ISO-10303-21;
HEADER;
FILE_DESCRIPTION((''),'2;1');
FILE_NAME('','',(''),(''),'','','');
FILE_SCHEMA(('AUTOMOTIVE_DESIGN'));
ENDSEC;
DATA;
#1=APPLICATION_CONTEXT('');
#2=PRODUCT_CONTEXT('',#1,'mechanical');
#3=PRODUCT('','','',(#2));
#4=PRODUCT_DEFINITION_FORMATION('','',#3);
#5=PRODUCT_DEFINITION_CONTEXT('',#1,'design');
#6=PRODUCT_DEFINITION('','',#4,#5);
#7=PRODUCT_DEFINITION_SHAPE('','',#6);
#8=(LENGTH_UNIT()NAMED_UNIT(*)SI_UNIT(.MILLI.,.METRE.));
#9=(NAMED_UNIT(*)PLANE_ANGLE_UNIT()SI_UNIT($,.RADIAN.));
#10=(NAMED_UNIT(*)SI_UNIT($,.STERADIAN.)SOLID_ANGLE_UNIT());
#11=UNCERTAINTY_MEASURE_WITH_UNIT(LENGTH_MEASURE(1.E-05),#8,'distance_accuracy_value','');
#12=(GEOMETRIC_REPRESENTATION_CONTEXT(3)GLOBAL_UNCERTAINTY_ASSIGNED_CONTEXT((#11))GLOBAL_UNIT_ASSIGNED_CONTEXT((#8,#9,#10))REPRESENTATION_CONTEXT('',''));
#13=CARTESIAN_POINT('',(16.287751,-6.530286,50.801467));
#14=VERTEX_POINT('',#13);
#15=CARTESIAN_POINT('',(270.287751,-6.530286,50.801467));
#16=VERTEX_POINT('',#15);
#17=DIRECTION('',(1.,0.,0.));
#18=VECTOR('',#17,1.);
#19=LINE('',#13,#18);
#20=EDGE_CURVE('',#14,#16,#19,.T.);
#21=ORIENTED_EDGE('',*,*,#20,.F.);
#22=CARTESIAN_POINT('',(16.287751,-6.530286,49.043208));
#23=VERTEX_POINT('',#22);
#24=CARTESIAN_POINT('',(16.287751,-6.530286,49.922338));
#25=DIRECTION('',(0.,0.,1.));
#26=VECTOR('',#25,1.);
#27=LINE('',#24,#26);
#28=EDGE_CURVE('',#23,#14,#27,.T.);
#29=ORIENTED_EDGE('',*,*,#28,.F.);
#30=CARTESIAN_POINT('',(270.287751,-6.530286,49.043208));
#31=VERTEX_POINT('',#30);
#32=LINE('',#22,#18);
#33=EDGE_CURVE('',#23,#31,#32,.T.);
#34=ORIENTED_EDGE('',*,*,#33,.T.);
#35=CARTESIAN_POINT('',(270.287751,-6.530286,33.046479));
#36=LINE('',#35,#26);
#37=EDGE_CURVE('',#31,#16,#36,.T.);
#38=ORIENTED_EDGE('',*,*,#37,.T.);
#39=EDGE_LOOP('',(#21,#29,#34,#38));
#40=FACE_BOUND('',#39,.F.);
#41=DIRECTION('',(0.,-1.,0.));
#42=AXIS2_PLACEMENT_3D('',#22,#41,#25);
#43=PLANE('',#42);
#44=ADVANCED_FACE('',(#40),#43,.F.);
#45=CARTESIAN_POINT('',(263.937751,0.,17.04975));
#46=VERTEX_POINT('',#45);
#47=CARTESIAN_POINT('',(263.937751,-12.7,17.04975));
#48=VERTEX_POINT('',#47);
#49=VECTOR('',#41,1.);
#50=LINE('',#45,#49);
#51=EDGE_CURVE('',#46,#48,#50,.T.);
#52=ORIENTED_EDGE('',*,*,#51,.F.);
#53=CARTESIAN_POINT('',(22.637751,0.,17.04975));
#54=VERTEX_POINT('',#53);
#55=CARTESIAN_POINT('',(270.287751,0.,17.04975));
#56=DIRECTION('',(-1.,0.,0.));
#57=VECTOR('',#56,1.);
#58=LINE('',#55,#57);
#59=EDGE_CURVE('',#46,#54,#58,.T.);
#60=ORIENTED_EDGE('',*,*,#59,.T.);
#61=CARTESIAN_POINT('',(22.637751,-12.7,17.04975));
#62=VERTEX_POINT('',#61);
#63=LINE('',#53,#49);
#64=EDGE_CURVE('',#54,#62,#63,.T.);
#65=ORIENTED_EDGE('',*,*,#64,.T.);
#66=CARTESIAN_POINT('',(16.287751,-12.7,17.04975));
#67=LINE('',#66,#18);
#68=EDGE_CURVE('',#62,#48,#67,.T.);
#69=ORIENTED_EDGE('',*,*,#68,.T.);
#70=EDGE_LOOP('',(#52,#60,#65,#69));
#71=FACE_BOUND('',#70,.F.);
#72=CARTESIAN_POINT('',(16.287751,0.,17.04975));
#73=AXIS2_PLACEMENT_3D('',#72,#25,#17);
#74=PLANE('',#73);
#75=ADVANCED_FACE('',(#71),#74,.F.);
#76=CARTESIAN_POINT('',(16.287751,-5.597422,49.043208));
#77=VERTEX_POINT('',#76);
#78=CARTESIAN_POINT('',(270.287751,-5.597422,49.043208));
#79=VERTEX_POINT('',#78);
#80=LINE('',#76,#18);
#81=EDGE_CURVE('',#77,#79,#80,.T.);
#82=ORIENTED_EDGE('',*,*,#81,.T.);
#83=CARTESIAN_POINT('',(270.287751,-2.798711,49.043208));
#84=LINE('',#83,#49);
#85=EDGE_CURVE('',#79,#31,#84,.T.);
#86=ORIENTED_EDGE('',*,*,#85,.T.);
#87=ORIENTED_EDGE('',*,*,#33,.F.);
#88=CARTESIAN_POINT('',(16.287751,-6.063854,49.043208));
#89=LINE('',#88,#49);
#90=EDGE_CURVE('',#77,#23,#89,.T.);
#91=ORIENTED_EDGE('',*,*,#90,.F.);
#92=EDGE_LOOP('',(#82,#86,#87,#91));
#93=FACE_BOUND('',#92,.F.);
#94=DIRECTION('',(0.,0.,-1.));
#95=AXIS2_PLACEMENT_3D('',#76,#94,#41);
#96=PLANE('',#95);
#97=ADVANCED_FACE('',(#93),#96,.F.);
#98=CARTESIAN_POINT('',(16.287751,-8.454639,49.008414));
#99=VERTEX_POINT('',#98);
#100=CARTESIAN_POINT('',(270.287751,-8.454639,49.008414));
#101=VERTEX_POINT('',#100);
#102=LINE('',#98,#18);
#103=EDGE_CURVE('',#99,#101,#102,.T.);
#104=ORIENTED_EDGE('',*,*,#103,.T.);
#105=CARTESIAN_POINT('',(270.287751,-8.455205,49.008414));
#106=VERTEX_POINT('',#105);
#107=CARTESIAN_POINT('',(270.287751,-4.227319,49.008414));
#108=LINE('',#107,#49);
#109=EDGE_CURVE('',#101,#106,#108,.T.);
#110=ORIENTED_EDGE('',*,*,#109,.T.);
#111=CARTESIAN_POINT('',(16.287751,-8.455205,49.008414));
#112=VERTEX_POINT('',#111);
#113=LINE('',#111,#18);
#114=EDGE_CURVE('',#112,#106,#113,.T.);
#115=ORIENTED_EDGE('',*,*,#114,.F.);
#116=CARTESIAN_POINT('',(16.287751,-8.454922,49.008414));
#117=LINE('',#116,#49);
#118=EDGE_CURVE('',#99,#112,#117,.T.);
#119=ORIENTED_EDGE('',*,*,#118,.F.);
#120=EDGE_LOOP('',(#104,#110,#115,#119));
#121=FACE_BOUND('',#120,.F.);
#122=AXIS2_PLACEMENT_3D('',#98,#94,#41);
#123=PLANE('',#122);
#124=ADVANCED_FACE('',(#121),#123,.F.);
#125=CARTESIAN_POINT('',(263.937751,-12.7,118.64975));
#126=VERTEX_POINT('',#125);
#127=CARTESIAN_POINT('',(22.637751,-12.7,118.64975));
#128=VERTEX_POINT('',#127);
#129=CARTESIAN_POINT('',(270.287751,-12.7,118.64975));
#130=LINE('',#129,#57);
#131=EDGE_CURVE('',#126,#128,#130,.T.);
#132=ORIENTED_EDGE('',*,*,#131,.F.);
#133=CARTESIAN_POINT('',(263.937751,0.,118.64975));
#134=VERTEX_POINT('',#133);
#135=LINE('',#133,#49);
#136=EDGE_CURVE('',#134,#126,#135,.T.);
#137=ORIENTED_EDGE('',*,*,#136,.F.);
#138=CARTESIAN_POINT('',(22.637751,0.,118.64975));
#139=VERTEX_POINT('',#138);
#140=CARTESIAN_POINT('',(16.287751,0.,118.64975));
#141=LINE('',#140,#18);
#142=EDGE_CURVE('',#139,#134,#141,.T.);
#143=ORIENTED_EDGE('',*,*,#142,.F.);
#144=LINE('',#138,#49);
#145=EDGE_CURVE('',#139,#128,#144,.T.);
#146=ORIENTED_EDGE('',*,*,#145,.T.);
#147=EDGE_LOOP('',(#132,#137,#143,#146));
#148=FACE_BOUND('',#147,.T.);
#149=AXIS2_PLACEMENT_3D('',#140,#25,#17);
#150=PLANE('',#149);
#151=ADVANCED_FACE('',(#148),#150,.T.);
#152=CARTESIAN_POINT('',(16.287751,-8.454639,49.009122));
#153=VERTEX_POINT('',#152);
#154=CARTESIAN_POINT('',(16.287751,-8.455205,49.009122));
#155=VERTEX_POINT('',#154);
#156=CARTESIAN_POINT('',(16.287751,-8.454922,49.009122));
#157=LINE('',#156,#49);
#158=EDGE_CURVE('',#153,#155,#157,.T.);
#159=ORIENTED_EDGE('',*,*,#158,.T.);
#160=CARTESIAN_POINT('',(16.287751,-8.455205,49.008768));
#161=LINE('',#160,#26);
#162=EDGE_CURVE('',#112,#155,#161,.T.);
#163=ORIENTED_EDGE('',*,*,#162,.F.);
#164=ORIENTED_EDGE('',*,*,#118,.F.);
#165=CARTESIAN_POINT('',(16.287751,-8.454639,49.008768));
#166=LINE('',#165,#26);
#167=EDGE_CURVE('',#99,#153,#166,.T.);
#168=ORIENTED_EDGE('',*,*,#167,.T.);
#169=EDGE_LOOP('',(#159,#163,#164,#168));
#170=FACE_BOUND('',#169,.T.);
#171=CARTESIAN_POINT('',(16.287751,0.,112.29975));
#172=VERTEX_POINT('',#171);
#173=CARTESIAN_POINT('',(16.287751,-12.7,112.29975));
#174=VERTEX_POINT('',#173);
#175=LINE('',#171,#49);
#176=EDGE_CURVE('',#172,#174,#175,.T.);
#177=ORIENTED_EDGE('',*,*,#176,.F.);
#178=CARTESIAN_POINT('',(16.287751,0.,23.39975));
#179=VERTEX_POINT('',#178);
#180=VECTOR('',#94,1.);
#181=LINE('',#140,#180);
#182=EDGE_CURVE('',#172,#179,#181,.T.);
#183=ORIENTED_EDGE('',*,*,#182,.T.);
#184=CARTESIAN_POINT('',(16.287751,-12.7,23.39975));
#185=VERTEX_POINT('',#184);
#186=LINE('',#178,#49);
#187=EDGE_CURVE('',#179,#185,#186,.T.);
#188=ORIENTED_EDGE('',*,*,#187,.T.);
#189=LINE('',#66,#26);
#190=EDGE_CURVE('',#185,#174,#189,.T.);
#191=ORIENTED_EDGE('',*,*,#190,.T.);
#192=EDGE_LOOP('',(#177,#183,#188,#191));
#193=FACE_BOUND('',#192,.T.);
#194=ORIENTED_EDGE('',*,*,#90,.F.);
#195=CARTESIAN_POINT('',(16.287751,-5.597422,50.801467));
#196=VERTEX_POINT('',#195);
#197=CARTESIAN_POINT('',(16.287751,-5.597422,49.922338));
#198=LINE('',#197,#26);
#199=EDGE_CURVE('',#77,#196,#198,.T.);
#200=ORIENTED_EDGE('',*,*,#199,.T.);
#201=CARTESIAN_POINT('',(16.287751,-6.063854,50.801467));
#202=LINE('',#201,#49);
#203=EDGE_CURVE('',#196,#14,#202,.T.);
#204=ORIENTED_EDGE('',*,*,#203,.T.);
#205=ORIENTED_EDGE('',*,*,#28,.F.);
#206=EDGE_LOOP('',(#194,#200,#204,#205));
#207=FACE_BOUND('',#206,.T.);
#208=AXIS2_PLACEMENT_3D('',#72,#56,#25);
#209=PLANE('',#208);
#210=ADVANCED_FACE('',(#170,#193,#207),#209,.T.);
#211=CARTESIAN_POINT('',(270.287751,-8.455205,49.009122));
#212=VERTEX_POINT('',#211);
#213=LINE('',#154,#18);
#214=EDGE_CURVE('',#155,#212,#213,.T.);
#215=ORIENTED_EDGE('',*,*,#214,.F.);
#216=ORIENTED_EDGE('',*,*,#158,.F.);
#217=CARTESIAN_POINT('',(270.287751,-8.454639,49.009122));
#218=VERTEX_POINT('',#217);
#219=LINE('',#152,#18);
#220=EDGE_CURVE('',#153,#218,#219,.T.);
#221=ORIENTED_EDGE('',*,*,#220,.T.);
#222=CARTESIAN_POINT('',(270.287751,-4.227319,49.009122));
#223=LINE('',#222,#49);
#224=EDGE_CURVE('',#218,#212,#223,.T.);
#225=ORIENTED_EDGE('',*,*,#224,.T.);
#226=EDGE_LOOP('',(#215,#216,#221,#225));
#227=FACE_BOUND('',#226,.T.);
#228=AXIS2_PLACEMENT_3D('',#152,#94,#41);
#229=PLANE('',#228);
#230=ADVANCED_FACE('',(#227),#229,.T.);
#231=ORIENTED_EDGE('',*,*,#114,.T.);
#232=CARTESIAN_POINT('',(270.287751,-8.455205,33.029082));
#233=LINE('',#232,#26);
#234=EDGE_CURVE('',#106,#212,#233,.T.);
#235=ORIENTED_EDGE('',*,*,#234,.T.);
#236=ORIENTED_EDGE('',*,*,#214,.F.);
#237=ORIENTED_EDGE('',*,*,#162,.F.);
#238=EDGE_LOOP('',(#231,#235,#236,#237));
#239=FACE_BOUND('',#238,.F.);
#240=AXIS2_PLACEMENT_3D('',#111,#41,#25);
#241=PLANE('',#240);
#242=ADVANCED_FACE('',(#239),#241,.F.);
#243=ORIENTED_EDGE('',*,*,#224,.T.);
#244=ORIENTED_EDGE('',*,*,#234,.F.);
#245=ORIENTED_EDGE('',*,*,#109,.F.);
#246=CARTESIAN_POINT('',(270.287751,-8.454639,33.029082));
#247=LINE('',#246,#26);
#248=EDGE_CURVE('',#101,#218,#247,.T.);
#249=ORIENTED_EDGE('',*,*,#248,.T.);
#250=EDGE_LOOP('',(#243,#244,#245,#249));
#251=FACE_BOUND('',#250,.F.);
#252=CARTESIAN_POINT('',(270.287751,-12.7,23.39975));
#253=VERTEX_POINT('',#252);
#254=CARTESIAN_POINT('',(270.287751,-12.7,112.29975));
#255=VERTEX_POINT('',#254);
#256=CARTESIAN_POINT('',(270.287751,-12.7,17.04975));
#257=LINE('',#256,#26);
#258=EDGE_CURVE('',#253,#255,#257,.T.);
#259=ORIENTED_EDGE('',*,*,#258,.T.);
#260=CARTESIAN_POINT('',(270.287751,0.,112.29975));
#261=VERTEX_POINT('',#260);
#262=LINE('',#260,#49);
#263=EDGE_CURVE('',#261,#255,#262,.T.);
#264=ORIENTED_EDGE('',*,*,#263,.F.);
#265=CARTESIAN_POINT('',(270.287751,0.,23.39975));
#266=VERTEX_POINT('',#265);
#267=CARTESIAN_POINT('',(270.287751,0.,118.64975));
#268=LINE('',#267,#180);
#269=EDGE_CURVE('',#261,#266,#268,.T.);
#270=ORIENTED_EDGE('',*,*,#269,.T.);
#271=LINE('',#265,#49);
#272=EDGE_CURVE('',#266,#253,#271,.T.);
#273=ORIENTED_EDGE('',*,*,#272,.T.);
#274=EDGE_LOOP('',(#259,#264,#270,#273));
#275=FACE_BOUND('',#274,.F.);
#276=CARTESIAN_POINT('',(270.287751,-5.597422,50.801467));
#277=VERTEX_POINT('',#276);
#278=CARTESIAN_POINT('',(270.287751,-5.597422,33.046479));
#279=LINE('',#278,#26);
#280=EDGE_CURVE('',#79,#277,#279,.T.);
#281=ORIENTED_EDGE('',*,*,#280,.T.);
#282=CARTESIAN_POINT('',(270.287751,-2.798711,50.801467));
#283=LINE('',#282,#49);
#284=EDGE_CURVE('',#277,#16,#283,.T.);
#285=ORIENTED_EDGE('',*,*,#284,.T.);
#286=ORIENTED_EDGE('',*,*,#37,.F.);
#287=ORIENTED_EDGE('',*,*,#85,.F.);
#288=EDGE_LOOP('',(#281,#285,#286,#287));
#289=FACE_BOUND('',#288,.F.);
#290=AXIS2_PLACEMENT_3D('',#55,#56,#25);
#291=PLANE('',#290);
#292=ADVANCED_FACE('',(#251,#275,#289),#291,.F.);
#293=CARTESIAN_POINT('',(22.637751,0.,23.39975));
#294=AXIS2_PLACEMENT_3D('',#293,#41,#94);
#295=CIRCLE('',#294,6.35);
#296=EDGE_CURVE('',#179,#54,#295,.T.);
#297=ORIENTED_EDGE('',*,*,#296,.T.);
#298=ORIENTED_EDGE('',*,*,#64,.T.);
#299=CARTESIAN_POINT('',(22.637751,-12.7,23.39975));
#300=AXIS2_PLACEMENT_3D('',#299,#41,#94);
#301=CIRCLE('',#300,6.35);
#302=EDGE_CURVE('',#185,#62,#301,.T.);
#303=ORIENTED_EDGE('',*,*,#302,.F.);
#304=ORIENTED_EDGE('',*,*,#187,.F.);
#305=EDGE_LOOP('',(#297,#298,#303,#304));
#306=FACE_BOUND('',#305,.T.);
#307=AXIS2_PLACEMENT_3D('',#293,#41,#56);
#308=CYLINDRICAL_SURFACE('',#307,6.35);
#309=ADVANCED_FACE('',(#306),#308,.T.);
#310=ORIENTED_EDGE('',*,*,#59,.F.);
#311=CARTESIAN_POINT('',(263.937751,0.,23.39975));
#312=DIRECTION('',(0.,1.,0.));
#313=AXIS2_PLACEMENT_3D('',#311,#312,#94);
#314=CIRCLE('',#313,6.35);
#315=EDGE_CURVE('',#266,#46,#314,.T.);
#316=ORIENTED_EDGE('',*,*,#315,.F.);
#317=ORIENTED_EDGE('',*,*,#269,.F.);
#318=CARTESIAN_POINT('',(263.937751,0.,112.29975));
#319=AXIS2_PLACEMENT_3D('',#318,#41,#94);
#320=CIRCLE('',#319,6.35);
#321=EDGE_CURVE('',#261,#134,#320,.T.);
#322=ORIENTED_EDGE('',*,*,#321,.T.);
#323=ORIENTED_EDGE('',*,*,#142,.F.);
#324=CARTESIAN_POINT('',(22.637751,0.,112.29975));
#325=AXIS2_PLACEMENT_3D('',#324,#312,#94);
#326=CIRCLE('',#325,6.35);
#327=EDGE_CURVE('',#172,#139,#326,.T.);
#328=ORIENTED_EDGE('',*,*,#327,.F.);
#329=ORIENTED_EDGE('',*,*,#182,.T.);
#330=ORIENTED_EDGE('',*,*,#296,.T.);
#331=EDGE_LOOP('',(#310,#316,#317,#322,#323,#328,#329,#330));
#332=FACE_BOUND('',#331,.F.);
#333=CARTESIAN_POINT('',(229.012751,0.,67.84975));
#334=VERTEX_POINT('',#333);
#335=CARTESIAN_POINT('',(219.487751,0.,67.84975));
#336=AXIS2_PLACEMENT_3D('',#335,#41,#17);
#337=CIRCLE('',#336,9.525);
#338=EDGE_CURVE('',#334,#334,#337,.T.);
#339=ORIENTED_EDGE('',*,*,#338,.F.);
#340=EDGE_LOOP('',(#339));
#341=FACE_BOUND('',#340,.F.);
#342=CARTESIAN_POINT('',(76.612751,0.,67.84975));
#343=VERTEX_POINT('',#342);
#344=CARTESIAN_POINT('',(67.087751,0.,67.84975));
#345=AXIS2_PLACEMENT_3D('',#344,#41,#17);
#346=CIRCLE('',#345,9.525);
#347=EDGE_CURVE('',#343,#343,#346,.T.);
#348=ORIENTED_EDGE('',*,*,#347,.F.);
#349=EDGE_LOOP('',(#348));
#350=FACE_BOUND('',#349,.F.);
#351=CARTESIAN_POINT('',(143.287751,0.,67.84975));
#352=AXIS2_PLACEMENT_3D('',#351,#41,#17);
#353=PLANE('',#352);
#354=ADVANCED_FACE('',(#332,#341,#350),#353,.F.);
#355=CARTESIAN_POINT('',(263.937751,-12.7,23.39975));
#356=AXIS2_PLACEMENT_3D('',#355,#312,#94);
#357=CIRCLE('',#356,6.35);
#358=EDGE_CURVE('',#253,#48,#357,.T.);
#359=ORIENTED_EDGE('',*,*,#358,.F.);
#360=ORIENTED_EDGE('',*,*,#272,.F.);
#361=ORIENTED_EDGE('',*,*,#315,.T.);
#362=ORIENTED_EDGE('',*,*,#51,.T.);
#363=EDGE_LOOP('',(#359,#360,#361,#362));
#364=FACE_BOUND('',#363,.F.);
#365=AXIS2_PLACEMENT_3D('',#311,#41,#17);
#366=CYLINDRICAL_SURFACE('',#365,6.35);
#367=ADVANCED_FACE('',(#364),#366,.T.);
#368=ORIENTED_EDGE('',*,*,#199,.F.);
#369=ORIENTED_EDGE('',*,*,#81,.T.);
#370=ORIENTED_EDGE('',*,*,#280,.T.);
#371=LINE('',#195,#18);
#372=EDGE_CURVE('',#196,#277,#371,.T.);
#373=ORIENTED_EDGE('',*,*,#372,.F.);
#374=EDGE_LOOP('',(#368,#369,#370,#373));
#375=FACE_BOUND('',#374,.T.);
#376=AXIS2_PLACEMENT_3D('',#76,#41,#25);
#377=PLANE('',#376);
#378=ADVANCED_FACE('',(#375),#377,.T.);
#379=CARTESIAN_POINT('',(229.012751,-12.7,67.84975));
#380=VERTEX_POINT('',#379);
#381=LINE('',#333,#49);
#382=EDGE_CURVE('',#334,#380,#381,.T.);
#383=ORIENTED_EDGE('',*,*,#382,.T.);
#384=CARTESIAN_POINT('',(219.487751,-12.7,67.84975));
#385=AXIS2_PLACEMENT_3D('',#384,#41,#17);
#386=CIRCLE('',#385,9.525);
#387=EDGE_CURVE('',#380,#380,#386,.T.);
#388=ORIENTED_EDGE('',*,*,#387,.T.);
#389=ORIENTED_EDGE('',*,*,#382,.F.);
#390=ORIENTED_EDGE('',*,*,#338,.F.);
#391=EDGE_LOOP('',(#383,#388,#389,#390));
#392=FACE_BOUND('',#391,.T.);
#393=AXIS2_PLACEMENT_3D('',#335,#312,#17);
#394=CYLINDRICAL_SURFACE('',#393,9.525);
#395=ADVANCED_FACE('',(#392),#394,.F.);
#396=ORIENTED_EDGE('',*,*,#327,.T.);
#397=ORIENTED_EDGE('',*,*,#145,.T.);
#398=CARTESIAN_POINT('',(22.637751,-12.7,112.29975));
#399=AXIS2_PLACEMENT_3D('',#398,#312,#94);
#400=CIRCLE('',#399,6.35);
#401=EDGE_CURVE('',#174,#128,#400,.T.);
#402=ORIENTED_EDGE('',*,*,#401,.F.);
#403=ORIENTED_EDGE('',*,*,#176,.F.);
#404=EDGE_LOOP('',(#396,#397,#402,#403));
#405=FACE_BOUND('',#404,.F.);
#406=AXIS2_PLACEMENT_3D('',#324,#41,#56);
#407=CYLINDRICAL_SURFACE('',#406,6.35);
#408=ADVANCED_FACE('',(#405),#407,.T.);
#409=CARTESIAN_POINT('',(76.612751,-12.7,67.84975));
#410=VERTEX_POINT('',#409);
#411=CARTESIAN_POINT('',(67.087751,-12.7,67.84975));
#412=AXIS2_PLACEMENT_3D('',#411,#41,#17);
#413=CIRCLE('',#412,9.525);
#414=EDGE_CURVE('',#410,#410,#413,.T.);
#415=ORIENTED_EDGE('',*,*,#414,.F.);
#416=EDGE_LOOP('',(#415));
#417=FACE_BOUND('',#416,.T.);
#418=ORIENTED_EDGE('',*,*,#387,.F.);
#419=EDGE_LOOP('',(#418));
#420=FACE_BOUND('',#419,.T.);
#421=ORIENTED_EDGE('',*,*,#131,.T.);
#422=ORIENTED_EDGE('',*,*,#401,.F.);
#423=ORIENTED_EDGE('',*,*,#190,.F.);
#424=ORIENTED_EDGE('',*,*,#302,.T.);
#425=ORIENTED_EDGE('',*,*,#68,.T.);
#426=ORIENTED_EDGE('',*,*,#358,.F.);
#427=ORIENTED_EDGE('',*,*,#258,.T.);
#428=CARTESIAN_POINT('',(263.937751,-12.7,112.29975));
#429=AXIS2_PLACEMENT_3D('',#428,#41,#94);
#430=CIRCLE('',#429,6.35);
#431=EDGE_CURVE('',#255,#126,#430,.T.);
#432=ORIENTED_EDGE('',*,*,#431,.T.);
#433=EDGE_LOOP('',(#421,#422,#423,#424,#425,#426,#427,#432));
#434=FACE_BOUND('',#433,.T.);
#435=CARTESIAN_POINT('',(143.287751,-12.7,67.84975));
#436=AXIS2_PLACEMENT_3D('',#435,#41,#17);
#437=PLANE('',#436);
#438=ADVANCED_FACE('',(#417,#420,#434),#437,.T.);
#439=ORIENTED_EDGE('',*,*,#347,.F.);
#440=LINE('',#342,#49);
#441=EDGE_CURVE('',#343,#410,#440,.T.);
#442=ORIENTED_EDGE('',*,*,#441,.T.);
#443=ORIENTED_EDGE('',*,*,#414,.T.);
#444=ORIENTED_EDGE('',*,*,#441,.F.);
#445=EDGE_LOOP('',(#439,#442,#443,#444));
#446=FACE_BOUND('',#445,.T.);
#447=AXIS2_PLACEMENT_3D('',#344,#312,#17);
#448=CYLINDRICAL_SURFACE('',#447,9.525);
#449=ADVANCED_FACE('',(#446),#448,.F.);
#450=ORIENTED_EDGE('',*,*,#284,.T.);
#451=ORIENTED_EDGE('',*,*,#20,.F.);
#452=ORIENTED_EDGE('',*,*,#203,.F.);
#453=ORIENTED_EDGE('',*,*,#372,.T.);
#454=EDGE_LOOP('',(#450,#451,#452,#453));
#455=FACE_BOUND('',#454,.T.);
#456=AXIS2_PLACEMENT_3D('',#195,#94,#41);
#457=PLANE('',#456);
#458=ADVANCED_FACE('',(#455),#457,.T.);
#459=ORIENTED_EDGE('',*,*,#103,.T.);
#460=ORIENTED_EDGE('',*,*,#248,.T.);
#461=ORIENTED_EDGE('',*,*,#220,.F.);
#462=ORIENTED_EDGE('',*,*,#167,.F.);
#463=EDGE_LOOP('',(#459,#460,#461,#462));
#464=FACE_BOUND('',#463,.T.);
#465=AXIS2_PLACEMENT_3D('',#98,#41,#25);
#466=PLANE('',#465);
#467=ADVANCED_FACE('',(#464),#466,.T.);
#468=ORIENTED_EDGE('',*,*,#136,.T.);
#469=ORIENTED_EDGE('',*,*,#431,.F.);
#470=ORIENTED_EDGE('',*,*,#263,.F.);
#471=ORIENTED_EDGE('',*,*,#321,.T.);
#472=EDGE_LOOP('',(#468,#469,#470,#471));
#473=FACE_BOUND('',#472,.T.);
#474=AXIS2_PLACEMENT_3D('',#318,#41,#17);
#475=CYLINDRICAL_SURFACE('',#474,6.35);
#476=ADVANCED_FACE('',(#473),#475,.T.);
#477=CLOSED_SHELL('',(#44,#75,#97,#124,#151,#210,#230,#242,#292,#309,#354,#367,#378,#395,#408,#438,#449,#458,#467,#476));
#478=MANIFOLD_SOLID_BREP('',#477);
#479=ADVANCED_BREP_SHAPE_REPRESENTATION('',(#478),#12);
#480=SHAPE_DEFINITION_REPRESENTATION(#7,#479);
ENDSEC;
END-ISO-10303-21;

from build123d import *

# Parameters (mm, degrees)
F0_W     = 254
F0_H     = 101.6
F0_R     = 9.525
F1_DEPTH = 12.7
F2_R     = 6.35
F3_DEPTH = 12.7
F4_R     = 6.35
F5_W     = 0.9328643791
F5_H     = 1.7582587898
F5_W_2   = 0.0005662441
F5_H_2   = 0.0007078052
F6_DEPTH = 254.001


# Not quite as in the source:
# - a feature of the source that left no trace in its solid (it failed there, or was rolled back) is left out


with BuildPart() as f1:
    # F0 (on Front) → F1 (new body)
    with BuildSketch(Plane.XZ):
        with Locations((143.2877514958, 67.8497503132)):
            Rectangle(F0_W, F0_H)
        with Locations((67.0877514958, 67.8497503132)):
            Circle(F0_R, mode=Mode.SUBTRACT)
        with Locations((219.4877514958, 67.8497503132)):
            Circle(F0_R, mode=Mode.SUBTRACT)
    extrude(amount=F1_DEPTH)

    # F2
    f2_edges = [f1.edges().sort_by_distance(p)[0] for p in [
        (16.287751, -6.35, 118.64975),
        (16.287751, -6.35, 17.04975),
        (270.287751, -6.35, 118.64975),
        (270.287751, -6.35, 17.04975),
    ]]
    fillet(f2_edges, radius=F2_R)

    # F0 (on Front) → F3 (join)
    with BuildSketch(Plane.XZ):
        with Locations((143.2877514958, 67.8497503132)):
            Rectangle(F0_W, F0_H)
        with Locations((67.0877514958, 67.8497503132)):
            Circle(F0_R, mode=Mode.SUBTRACT)
        with Locations((219.4877514958, 67.8497503132)):
            Circle(F0_R, mode=Mode.SUBTRACT)
    extrude(amount=F3_DEPTH)

    # F4
    f4_edges = [f1.edges().sort_by_distance(p)[0] for p in [
        (270.287751, -6.35, 118.64975),
        (16.287751, -6.35, 118.64975),
        (270.287751, -6.35, 17.04975),
        (16.287751, -6.35, 17.04975),
    ]]
    fillet(f4_edges, radius=F4_R)

    # F5 (on face) → F6 (cut, through all)
    with BuildSketch(Plane(origin=(16.2877514958, 0, 0), x_dir=(0, -1, 0), z_dir=(-1, 0, 0))):
        with Locations((6.063854089, 49.9223377556)):
            Rectangle(F5_W, F5_H)
        with Locations((8.4549216554, 49.0087680519)):
            Rectangle(F5_W_2, F5_H_2)
    extrude(amount=-F6_DEPTH, mode=Mode.SUBTRACT)


solid = f1.part
